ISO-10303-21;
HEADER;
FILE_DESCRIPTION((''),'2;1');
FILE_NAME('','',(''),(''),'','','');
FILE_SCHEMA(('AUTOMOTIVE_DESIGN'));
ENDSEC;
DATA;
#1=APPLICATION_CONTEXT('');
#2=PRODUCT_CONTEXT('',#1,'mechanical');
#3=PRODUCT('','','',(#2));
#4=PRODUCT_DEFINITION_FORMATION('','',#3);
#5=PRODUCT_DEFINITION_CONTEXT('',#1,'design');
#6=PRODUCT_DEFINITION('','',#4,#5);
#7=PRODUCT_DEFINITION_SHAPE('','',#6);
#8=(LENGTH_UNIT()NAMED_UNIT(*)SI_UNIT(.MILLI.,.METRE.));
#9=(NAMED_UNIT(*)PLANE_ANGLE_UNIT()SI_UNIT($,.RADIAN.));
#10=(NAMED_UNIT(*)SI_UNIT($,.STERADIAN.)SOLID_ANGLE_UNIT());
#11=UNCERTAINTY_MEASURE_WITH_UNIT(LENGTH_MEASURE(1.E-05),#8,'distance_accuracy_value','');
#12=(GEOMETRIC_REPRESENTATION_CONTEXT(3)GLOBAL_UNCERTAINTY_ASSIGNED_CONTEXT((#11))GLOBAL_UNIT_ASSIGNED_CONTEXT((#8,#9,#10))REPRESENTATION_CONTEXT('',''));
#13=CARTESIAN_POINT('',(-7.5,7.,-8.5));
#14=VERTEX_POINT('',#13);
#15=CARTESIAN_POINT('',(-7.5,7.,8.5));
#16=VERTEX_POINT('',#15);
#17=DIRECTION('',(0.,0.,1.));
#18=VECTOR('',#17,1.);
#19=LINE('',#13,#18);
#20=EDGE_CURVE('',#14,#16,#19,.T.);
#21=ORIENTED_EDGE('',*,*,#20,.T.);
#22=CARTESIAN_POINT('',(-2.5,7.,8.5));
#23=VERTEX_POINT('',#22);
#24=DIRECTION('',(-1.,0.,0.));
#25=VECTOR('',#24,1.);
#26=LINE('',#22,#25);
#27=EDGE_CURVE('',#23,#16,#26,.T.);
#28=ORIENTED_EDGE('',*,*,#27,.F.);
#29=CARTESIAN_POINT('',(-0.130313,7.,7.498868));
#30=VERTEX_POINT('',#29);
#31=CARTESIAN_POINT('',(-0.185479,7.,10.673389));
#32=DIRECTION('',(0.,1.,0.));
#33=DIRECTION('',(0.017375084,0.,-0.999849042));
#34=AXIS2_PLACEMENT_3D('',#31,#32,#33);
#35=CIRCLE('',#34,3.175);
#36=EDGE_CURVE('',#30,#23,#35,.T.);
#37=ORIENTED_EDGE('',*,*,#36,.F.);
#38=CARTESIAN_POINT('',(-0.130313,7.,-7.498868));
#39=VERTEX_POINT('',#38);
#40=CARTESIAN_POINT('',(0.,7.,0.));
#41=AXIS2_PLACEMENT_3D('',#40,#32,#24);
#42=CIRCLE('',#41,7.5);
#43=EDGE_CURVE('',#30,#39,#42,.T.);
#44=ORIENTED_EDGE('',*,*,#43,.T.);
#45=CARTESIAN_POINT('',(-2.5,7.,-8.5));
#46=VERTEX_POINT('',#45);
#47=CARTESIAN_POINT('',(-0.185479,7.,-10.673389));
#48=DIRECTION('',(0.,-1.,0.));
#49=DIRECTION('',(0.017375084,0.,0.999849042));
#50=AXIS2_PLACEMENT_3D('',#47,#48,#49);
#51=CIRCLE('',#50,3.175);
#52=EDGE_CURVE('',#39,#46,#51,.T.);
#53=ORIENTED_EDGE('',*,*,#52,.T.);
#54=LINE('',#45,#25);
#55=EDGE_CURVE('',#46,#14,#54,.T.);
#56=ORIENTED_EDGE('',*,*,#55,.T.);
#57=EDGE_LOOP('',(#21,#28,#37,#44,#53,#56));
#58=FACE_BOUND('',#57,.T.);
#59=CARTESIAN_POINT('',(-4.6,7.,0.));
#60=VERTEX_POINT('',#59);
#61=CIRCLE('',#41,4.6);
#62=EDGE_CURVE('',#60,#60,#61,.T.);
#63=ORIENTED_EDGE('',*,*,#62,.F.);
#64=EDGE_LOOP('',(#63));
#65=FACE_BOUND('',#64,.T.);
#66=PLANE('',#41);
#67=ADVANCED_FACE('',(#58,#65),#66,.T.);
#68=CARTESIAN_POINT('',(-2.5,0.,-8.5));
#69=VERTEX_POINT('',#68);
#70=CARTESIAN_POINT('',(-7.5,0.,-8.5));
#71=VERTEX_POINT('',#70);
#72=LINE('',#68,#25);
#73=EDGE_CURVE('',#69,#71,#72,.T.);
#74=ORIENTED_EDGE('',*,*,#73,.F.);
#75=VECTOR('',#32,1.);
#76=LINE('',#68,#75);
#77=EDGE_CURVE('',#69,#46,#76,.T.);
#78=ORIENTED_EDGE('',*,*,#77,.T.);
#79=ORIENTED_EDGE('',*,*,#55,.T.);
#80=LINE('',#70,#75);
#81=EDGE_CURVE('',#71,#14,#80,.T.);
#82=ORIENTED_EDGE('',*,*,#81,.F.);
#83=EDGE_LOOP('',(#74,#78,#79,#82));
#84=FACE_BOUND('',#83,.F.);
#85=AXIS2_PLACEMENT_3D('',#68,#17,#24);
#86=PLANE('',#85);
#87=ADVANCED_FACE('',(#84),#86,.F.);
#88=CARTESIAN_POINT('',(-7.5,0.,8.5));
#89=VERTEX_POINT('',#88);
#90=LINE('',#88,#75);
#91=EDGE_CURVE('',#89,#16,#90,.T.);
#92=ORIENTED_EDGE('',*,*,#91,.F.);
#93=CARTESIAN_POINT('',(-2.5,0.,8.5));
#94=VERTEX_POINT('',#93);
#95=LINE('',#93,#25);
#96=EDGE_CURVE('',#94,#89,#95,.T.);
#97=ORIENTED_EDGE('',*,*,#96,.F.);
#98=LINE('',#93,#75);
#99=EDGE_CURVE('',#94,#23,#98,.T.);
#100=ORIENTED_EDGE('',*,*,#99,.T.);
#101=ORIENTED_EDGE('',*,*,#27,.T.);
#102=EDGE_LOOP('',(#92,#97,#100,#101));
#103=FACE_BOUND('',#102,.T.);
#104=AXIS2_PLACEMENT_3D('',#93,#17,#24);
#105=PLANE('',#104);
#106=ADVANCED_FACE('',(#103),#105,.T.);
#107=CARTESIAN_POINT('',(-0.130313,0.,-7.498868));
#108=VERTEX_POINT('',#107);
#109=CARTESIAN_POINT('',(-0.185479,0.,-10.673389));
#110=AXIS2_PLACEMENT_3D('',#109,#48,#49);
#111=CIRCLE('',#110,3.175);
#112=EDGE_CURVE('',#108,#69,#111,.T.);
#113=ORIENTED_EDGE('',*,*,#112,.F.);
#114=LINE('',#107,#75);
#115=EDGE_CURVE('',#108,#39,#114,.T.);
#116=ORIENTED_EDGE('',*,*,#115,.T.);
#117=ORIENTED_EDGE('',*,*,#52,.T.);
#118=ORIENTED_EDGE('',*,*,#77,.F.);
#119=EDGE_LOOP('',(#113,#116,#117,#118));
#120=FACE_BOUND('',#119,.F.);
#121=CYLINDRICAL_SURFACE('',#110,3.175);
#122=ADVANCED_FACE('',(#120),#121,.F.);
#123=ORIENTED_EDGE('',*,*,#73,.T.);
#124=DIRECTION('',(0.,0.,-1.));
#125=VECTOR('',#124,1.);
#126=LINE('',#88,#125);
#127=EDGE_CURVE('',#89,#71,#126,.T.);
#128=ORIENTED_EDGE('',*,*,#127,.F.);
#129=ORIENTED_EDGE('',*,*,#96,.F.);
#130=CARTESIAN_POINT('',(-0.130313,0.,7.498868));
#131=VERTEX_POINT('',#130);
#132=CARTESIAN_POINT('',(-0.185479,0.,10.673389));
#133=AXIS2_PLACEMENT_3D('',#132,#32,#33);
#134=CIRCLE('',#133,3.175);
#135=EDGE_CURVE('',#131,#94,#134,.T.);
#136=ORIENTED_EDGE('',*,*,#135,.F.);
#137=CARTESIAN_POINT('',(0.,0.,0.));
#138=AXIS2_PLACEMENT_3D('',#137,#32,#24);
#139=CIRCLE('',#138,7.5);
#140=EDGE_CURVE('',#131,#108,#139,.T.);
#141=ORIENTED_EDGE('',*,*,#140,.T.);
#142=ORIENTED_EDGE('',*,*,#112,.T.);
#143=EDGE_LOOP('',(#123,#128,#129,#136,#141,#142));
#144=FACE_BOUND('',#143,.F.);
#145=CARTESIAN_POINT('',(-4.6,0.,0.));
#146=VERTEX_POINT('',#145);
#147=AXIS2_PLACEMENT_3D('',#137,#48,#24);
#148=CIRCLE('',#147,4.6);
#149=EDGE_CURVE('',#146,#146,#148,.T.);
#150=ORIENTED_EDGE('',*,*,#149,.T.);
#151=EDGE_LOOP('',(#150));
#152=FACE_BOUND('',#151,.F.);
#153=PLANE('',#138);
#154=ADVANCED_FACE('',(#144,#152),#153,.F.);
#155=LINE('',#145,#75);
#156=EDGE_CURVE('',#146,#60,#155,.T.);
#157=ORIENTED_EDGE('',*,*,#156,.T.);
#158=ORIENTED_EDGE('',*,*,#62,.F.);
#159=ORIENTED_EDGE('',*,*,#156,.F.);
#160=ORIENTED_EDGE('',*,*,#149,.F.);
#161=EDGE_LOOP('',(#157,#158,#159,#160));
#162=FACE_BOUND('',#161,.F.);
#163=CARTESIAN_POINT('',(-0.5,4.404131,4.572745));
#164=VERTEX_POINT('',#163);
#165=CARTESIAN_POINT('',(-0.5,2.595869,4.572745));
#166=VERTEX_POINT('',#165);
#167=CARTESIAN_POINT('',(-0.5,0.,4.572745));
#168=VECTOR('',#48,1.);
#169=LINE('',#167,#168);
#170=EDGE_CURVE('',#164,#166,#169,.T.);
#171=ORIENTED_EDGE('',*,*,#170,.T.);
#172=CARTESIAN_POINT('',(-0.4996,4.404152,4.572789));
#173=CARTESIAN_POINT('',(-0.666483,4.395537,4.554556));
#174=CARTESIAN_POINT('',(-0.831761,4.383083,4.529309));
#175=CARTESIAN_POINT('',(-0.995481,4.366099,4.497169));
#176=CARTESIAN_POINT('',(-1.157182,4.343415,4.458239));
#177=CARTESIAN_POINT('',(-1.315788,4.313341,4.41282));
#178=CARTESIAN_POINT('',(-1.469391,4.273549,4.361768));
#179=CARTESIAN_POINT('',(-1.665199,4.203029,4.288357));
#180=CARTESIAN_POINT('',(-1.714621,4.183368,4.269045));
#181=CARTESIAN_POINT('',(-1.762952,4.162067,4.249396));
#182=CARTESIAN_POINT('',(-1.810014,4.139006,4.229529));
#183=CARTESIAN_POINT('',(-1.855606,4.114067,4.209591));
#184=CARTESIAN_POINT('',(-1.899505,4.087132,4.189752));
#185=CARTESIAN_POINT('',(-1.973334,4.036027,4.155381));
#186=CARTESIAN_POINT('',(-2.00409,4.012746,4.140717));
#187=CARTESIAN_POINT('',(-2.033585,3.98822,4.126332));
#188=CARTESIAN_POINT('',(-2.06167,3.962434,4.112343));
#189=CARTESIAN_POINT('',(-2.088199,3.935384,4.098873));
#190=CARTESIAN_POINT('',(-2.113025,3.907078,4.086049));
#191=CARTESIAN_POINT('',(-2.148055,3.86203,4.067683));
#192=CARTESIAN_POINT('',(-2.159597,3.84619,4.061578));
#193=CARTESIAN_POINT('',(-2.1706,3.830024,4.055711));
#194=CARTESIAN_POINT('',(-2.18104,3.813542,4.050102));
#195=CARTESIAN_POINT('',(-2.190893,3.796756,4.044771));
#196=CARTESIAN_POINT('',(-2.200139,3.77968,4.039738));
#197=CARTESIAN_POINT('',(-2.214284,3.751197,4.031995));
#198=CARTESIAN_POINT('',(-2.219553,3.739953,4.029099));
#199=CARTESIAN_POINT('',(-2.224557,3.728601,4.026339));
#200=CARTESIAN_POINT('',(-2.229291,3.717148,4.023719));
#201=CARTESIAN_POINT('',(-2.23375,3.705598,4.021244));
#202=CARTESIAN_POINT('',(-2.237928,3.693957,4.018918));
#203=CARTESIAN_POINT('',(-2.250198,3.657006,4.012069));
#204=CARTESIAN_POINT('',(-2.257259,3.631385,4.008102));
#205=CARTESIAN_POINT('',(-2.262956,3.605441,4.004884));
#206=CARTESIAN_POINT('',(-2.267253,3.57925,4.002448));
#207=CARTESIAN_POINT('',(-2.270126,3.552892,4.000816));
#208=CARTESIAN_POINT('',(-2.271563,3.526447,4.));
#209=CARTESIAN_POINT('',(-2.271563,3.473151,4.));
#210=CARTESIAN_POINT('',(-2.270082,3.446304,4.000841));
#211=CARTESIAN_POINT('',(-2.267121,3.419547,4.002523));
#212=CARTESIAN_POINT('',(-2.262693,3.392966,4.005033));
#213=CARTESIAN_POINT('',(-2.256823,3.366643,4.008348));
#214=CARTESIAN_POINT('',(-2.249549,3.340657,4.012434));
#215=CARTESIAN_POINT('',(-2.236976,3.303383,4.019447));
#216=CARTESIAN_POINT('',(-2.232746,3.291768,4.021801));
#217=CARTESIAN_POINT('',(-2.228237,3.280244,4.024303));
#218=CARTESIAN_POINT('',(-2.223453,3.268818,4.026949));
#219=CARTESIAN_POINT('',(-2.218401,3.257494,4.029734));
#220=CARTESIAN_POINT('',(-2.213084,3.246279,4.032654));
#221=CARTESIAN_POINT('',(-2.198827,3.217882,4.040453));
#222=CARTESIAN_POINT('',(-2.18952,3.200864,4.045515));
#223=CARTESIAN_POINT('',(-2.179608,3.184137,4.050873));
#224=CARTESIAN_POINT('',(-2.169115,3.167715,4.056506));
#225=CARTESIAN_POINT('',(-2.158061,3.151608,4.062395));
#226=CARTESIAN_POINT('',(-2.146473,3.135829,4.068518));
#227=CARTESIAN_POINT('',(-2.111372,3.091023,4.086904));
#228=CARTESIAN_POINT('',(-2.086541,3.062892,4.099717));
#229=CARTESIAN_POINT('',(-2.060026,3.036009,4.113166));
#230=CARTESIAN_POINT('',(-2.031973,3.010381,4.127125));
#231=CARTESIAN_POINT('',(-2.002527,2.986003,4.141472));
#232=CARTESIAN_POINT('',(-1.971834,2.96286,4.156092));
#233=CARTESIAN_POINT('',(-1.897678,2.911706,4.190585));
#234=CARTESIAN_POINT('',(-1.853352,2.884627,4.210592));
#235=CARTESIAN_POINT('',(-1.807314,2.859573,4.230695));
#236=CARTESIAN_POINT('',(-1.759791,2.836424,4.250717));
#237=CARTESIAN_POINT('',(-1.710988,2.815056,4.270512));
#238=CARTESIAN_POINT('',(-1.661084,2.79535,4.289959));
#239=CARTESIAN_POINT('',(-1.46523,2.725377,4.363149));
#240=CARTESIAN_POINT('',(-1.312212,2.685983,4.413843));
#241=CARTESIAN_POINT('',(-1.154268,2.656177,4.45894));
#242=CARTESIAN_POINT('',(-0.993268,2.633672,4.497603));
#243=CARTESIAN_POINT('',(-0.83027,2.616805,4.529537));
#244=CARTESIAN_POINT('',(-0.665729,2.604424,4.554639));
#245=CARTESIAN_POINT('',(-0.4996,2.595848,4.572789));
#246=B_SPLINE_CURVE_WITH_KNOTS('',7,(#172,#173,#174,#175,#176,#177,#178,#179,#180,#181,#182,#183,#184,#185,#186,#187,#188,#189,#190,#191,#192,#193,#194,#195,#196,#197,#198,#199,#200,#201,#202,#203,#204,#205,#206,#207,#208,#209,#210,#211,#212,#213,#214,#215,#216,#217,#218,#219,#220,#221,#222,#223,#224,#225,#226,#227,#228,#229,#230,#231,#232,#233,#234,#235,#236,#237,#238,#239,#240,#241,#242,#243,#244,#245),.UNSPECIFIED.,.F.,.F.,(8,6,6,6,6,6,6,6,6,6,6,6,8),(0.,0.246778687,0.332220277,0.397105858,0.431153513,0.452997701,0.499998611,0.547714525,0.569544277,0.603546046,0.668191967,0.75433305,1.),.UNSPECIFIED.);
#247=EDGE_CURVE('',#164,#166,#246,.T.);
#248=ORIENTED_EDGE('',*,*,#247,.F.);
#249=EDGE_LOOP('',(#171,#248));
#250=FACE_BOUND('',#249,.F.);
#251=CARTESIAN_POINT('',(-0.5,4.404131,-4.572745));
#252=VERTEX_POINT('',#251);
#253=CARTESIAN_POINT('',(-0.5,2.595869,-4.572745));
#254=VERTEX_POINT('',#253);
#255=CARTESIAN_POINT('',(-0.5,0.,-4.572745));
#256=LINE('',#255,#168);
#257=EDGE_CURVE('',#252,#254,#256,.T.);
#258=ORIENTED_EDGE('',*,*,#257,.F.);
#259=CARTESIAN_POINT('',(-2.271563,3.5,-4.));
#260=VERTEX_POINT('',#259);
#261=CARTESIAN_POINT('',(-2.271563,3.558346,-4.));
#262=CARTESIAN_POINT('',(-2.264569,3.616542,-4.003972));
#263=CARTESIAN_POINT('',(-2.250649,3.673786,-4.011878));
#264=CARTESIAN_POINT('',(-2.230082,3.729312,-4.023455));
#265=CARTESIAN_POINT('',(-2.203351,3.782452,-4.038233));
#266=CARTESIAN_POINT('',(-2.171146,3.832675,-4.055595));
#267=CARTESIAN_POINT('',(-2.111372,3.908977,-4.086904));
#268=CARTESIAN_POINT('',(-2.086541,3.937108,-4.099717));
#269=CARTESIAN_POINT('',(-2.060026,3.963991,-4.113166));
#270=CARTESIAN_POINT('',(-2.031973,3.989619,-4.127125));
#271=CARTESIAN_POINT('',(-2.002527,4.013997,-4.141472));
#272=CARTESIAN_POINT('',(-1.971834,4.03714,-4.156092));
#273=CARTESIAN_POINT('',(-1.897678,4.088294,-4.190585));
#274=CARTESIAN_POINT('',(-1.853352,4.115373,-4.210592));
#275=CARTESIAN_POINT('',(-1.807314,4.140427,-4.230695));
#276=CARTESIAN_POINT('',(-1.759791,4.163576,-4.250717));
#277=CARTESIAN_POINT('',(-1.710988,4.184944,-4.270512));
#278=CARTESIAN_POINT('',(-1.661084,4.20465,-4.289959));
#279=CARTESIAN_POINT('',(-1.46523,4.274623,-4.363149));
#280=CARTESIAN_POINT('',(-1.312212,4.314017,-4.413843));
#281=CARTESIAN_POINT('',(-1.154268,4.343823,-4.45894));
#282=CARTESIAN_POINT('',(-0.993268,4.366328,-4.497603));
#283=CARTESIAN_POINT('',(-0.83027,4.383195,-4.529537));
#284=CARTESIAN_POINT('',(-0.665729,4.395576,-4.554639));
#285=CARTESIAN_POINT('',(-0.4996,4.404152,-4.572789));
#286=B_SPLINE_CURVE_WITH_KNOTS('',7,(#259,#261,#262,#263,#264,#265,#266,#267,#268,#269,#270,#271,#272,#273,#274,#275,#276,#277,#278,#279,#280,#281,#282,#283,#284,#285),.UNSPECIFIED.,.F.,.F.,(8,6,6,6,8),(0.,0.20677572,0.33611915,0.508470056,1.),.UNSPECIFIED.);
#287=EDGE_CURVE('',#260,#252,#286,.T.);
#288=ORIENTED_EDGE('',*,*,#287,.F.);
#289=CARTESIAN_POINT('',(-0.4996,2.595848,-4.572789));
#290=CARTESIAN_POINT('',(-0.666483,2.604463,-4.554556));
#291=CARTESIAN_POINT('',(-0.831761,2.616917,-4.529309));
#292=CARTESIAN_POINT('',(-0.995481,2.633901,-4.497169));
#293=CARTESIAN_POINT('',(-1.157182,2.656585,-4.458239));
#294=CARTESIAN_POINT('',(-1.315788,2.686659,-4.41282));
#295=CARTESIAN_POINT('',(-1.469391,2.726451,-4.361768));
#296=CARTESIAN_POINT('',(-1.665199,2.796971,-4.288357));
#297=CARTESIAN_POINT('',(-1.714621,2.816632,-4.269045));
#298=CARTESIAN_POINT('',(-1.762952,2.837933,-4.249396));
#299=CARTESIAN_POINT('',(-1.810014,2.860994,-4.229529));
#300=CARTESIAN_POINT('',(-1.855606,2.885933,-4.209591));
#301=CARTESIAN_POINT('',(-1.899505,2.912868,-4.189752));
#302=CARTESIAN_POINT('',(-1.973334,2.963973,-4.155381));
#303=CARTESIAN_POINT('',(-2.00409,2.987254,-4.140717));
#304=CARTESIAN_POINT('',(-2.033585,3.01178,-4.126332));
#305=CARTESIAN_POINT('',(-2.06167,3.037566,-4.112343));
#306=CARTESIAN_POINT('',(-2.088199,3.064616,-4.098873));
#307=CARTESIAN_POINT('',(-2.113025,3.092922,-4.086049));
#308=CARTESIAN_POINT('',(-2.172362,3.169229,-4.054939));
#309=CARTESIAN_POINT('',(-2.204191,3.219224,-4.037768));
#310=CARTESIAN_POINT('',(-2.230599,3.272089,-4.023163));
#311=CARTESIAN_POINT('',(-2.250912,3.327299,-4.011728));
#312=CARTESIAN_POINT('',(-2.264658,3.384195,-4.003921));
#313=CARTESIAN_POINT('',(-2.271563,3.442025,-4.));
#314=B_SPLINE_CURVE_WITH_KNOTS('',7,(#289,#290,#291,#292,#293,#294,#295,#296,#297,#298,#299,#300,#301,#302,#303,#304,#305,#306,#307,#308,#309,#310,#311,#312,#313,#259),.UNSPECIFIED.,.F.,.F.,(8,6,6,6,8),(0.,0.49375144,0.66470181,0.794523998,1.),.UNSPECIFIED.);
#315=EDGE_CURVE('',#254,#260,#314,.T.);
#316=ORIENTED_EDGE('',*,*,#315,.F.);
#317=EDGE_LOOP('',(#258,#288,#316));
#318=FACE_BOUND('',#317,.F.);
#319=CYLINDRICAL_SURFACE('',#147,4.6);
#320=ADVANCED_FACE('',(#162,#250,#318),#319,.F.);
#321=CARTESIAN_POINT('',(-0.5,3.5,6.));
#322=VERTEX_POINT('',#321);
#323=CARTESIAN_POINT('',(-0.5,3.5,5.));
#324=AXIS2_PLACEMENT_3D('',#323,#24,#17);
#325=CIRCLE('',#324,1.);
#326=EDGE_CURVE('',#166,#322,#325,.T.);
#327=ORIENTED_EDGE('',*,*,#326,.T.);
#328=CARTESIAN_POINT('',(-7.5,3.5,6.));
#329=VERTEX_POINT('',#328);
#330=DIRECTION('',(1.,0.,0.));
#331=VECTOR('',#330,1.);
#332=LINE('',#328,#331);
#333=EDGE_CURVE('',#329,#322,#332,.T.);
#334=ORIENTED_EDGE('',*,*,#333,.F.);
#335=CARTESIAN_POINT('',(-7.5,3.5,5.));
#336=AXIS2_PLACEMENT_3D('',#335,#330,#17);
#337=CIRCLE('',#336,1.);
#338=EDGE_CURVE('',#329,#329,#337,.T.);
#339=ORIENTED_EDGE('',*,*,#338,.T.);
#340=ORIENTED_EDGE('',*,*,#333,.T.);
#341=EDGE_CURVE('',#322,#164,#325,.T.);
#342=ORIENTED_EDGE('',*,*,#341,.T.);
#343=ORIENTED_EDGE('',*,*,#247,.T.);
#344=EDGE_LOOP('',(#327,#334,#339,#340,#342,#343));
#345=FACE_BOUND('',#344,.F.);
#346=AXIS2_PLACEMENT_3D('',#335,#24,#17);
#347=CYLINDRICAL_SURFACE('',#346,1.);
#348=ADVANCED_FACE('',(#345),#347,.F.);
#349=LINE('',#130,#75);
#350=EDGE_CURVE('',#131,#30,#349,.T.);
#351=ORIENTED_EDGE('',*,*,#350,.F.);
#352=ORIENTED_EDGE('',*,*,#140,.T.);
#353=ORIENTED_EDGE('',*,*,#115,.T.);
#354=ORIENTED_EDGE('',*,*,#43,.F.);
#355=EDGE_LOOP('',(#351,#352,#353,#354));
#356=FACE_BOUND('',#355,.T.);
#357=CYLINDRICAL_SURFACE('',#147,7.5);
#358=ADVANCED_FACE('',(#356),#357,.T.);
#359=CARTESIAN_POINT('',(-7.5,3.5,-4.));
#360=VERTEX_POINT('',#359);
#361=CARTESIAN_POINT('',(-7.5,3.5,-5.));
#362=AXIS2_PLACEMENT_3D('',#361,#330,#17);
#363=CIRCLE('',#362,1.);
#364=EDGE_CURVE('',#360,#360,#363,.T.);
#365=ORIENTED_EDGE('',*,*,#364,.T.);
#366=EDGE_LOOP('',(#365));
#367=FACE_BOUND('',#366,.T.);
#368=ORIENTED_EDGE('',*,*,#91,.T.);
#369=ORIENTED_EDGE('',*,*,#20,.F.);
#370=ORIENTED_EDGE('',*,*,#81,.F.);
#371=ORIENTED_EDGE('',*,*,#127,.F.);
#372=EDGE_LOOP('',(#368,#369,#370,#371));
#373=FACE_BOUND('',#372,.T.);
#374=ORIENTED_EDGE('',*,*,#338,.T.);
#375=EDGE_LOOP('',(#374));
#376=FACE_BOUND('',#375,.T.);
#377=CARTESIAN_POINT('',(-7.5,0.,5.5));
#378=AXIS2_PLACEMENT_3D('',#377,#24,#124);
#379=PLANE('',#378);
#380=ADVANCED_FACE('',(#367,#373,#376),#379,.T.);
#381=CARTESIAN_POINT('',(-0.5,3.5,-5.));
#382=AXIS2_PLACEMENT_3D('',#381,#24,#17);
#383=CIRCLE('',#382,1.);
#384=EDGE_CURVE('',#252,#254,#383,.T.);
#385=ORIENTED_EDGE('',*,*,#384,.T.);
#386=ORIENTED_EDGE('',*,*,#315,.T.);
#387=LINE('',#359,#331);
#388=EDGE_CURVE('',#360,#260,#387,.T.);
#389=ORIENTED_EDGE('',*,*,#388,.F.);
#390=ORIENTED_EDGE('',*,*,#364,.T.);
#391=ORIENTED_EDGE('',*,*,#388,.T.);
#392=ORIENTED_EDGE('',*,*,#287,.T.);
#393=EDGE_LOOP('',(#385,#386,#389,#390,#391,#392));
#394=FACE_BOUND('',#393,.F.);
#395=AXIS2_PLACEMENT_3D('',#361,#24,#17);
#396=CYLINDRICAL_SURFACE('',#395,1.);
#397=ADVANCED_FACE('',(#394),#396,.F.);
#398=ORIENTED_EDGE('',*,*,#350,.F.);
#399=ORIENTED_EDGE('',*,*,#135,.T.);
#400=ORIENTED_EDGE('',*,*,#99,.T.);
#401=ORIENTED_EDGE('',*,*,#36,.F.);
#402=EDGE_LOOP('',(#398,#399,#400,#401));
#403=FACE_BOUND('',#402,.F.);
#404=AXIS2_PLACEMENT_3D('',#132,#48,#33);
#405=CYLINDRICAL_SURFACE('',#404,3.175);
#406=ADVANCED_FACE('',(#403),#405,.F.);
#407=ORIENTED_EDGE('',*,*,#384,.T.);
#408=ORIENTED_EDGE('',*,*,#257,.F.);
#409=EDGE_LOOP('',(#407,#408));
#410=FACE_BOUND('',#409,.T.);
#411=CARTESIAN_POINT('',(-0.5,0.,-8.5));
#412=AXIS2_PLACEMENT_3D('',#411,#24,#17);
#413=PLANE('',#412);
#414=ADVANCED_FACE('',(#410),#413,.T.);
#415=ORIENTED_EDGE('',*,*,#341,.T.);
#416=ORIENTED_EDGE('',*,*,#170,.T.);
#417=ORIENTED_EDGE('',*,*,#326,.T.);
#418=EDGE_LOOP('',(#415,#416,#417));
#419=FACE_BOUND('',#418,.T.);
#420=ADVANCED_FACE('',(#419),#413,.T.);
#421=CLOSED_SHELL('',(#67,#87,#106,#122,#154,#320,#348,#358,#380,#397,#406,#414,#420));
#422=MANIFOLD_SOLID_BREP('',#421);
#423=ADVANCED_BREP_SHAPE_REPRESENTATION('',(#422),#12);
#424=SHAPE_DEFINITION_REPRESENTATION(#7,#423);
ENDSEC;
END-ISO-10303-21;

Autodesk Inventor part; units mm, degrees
ref_plane "YZ Plane" through (0, 0, 0) normal (1, 0, 0) x (0, 1, 0)
ref_plane "XZ Plane" through (0, 0, 0) normal (0, 1, 0) x (-1, 0, 0)
ref_plane "XY Plane" through (0, 0, 0) normal (0, 0, 1) x (1, 0, 0)
sketch "Sketch1" plane through (0, 0, 0) normal (0, 1, 0) x (-1, 0, 0)
  circle A0 centre (0, 0) radius 4.6
  circle A1 centre (0, 0) radius 5.5
  line L0 (0, 5.5) -> (7.5, 5.5)
  line L1 (7.5, 5.5) -> (7.5, -5.5)
  line L2 (7.5, -5.5) -> (0, -5.5)
  line L3 (0, -5.5) -> (0, 5.5)
  line L4 (7.5, 5.5) -> (2.5, 5.5)
  line L5 (2.5, 5.5) -> (2.5, 8.5)
  line L6 (2.5, 8.5) -> (7.5, 8.5)
  line L7 (7.5, 8.5) -> (7.5, 5.5)
  line L8 (7.5, -5.5) -> (2.5, -5.5)
  line L9 (2.5, -5.5) -> (2.5, -8.5)
  line L10 (2.5, -8.5) -> (7.5, -8.5)
  line L11 (7.5, -8.5) -> (7.5, -5.5)
  circle A2 centre (0, 0) radius 7.5
  point P0 (2.5, -5.5)
  point P1 (2.5, 7.0711)
  point P2 (2.5, -7.0711)
  dimension "d1" = 11
  dimension "d0" = 9.2
  dimension "d2" = 5
  dimension "d3" = 3
  dimension "d4" = 5
  dimension "d5" = 3
extrude "Extrusion1" add sketch "Sketch1" along normal blind 7 contours A0 L3 A1 | A0 L3 A1 | L0 A2 L2 A1 | A1 L2 L9 A2 L5 L0 | L5 A2 L0 | L2 A2 L9 | A2 L5 L6 L7 L0 | L0 L1 A2 | A2 L1 L2 | L2 L11 L10 L9 A2
fillet "Fillet1" radius 3.175 2 edges at (-2.5, 3.5, -7.0711) (-2.5, 3.5, 7.0711)
sketch "Sketch2" plane through (-7.5, 0, -8.5) normal (-1, 0, 0) x (0, 0, 1)
  line L0 (0, 7) -> (17, 7) projected
  line L1 (0, 7) -> (3.5, 7)
  line L2 (3.5, 7) -> (13.5, 7)
  line L3 (3.5, 7) -> (3.5, 3.5)
  line L4 (0, 0) -> (17, 0) projected
  line L5 (13.5, 7) -> (13.5, 3.5)
  circle A0 centre (3.5, 3.5) radius 1
  circle A1 centre (13.5, 3.5) radius 1
  point P0 (8.5, 0)
  dimension "d9" = 3.5
  dimension "d10" = 10
  dimension "d11" = 3.5
  dimension "d12" = 3.5
  dimension "d13" = 2
  dimension "d14" = 2
extrude "Extrusion2" cut sketch "Sketch2" against normal blind 7
properties part number "screw_support"
